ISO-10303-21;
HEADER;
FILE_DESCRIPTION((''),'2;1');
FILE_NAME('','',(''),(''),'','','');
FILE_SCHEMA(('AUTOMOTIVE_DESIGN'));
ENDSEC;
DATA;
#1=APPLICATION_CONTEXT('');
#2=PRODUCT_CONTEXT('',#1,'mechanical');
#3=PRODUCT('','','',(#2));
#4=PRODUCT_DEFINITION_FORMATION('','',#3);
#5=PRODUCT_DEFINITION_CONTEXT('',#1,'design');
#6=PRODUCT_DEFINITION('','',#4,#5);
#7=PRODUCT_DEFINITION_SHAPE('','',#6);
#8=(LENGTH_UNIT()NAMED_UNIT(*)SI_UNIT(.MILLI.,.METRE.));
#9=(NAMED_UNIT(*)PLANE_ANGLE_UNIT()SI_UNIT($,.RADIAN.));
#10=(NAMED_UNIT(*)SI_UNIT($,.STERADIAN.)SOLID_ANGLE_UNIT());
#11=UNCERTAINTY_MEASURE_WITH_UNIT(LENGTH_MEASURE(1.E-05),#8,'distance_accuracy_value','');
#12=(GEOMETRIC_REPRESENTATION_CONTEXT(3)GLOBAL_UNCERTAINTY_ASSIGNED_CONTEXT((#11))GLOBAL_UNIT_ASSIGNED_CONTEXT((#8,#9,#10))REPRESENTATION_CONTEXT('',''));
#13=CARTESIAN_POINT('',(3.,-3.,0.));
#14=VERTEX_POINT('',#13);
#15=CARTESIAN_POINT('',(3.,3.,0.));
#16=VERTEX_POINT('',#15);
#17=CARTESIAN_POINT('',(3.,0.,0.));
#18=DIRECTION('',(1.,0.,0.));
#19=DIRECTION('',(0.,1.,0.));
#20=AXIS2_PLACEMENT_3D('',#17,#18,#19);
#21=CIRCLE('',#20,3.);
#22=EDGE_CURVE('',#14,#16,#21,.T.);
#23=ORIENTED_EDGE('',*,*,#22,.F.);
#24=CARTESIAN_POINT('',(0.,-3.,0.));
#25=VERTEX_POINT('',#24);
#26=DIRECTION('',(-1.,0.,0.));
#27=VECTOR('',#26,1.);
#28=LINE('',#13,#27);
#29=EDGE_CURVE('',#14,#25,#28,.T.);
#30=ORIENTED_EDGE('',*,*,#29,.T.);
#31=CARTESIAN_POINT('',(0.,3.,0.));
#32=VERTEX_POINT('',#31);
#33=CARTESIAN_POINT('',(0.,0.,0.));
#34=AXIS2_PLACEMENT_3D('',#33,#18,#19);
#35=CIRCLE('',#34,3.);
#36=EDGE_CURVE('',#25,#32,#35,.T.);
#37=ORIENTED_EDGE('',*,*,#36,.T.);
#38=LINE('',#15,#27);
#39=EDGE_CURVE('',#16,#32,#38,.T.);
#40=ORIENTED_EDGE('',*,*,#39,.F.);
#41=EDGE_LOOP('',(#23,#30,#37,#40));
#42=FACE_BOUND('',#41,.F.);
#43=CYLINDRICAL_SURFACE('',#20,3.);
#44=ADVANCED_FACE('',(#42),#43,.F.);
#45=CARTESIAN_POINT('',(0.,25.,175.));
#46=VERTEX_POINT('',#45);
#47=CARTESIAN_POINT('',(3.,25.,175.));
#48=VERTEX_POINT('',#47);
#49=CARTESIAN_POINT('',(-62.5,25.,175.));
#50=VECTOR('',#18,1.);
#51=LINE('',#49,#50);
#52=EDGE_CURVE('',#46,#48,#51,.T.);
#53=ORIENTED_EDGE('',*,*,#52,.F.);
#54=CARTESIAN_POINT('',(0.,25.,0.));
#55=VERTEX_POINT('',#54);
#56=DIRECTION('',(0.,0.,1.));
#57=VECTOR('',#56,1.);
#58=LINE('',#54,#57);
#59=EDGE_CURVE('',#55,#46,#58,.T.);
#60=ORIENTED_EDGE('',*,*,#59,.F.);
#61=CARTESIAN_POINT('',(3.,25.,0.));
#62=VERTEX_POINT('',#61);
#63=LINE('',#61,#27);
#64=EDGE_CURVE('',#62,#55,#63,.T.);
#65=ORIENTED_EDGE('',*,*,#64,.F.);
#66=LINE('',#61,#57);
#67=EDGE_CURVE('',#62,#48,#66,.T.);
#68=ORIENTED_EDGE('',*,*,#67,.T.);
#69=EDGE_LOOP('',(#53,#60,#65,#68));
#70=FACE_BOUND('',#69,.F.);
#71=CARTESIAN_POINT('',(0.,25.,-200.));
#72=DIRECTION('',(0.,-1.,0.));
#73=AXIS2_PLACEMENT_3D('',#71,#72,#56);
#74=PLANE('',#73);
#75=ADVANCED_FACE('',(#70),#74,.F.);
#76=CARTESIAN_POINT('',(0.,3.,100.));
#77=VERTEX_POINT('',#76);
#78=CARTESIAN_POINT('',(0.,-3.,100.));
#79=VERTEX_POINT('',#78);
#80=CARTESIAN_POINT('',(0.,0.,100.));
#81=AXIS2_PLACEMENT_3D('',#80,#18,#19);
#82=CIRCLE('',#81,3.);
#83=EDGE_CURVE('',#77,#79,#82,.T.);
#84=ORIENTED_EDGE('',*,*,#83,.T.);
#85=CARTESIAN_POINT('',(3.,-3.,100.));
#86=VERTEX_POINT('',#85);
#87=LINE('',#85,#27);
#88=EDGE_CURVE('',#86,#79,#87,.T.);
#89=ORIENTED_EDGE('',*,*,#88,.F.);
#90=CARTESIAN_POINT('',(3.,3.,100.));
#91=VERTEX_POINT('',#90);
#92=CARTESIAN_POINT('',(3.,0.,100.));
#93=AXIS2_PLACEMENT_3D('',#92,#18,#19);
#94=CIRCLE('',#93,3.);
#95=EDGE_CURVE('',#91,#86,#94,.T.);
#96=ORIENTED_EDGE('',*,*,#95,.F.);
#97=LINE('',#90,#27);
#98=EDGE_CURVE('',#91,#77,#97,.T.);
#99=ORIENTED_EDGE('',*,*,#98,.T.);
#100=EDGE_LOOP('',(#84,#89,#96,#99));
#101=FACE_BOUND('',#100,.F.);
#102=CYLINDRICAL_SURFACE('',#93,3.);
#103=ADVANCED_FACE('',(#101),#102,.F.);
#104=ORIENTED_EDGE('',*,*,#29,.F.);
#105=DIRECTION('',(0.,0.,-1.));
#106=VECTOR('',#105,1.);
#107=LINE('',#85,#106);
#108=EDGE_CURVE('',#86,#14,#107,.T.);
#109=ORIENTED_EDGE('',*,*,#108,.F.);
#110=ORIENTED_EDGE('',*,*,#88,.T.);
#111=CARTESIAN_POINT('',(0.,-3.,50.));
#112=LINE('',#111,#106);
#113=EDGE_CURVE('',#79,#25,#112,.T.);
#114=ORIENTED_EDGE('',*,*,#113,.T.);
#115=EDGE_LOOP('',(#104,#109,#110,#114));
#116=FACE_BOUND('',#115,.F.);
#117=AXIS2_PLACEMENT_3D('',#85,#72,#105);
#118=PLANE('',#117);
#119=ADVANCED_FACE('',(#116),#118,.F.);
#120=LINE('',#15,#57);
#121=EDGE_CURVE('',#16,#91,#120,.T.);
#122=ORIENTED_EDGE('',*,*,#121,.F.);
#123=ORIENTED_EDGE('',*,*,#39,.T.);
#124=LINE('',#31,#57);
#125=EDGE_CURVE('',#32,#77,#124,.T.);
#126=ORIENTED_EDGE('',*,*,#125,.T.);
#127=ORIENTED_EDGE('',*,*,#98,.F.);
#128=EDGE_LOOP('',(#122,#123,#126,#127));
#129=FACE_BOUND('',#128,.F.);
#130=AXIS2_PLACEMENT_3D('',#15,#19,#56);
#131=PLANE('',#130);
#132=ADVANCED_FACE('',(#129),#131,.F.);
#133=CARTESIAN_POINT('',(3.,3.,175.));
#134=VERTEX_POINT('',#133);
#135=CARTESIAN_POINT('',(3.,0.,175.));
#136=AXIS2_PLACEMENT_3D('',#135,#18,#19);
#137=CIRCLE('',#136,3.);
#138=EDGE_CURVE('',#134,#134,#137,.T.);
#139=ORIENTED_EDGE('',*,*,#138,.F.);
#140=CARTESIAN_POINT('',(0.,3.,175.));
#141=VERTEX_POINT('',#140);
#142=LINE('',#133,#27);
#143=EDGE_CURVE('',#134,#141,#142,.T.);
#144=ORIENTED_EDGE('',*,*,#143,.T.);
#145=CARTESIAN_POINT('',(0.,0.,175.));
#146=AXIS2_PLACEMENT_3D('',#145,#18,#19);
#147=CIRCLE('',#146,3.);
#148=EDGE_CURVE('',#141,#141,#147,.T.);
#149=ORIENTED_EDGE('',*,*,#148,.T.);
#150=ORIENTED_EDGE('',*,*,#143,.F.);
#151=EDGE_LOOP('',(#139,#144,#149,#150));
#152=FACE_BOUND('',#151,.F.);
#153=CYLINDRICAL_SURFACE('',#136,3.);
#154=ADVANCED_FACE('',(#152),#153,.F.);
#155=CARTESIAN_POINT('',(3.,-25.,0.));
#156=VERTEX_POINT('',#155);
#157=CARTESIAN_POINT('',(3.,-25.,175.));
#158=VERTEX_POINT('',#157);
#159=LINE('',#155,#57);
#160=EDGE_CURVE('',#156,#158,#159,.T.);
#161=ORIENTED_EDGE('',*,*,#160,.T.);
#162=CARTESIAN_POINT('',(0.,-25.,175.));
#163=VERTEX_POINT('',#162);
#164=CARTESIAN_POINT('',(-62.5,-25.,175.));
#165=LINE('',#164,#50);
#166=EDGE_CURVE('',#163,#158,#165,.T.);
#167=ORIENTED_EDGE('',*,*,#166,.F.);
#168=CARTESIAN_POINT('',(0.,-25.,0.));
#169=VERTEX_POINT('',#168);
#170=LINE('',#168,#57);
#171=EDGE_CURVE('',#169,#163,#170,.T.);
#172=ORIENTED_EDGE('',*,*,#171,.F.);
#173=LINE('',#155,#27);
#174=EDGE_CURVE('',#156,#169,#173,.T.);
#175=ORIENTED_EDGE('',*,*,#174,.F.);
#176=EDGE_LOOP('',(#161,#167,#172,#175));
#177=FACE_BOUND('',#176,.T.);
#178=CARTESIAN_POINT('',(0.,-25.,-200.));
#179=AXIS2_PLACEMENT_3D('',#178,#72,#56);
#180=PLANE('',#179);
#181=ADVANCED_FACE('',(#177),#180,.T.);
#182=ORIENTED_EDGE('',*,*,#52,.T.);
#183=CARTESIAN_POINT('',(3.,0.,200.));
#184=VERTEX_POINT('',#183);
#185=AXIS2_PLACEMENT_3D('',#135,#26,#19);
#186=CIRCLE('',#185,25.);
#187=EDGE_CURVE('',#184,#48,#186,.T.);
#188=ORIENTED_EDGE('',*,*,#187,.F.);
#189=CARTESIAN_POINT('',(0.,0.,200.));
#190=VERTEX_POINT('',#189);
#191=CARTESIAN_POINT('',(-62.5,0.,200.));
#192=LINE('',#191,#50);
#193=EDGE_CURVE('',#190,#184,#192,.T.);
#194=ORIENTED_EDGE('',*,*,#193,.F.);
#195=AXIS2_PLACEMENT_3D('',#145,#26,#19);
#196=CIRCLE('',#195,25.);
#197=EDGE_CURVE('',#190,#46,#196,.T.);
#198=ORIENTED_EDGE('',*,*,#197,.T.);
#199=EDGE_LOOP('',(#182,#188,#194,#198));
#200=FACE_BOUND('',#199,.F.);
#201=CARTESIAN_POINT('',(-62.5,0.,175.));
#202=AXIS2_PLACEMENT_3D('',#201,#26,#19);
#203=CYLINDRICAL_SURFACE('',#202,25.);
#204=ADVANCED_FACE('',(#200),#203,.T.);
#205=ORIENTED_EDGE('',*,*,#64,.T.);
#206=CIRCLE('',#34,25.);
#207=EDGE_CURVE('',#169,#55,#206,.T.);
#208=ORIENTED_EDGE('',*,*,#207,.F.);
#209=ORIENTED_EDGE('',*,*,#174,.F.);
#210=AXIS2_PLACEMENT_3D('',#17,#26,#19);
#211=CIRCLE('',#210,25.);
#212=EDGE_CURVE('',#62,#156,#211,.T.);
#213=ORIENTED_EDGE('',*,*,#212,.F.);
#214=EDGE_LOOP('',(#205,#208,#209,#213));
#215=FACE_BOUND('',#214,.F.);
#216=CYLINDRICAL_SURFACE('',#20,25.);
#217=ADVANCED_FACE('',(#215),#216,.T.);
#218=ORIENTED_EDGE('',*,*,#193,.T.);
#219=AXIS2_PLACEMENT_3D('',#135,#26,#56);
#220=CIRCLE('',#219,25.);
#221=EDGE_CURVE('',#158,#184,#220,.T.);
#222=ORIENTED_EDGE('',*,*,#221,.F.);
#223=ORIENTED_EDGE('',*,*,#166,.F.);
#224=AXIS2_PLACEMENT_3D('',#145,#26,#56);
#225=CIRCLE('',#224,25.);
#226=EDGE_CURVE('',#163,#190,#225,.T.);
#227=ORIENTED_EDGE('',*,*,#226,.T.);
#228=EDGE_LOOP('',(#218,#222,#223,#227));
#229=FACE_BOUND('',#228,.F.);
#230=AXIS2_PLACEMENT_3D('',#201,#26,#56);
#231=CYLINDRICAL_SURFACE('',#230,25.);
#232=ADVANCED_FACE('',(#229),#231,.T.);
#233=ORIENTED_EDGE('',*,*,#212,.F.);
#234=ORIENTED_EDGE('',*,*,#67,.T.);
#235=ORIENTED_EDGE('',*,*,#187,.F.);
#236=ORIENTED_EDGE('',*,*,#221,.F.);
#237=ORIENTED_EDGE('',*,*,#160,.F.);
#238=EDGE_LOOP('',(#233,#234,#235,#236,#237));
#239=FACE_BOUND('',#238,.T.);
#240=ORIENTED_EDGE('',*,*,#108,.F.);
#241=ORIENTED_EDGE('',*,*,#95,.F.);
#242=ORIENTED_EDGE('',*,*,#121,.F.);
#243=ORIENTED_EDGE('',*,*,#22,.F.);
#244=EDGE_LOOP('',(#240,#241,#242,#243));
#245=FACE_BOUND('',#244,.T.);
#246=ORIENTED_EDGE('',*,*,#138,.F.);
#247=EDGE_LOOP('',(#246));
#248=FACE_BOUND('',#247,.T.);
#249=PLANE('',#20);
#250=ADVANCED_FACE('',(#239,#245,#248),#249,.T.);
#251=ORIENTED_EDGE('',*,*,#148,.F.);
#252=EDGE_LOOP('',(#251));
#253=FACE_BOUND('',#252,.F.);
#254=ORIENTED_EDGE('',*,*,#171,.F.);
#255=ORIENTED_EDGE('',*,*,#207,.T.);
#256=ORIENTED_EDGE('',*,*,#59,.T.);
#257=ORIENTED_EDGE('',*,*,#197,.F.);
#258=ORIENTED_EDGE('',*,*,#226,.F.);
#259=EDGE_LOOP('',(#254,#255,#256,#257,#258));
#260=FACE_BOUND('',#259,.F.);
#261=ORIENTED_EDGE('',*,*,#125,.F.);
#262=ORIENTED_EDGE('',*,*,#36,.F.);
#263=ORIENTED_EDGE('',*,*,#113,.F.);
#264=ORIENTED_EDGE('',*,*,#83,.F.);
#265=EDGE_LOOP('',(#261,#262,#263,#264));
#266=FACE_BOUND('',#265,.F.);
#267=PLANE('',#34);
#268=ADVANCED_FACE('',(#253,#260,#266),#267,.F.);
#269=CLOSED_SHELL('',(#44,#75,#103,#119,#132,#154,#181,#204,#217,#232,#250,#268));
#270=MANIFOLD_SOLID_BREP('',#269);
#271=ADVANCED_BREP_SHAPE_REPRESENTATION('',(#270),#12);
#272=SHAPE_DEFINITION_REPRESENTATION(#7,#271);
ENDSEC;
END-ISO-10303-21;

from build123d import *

# Parameters (mm, degrees)
F0_W        = 50
F0_H        = 400
F1_DEPTH    = 3
F2_T1_DEPTH = 128
F3_R        = 3
F4_DEPTH    = 25
F6_DEPTH    = 25
F8_DEPTH    = 25


# Not quite as in the source:
# - a fillet or chamfer that OpenCascade refuses, or shapes differently, is made with other operations: its cross-section is extruded or revolved along the edge and cut away or added


with BuildPart() as f1:
    # F0 (on Right) → F1 (new body)
    with BuildSketch(Plane.YZ):
        Rectangle(F0_W, F0_H)
    extrude(amount=F1_DEPTH)

    # F2: fillet of radius 25 on 4 edges, made by hand

    # F2_s2 → F2_t1 (cut)
    with BuildSketch(Plane.YZ.offset(-62.5)):
        with BuildLine():
            ThreePointArc((0, 200), (-17.6776695297, 192.6776695297), (-25, 175))
            Line((-25, 175), (-25, 200))
            Line((-25, 200), (0, 200))
        make_face()
        with BuildLine():
            ThreePointArc((-25, -175), (-17.6776695297, -192.6776695297), (0, -200))
            Line((0, -200), (-25, -200))
            Line((-25, -200), (-25, -175))
        make_face()
        with BuildLine():
            ThreePointArc((25, 175), (17.6776695297, 192.6776695297), (0, 200))
            Line((0, 200), (25, 200))
            Line((25, 200), (25, 175))
        make_face()
        with BuildLine():
            ThreePointArc((25, -175), (17.6776695297, -192.6776695297), (0, -200))
            Line((0, -200), (25, -200))
            Line((25, -200), (25, -175))
        make_face()
    extrude(amount=F2_T1_DEPTH, mode=Mode.SUBTRACT)

    # F3 (on face) → F4 (cut)
    with BuildSketch(Plane.YZ.offset(3)):
        with Locations((0, 175)):
            Circle(F3_R)
    extrude(amount=-F4_DEPTH, mode=Mode.SUBTRACT)

    # F5 (on face) → F6 (cut)
    with BuildSketch(Plane.YZ.offset(3)):
        with BuildLine():
            ThreePointArc((-3, 100), (0, 97), (3, 100))
            ThreePointArc((3, 100), (0, 103), (-3, 100))
        make_face()
        with BuildLine():
            Line((3, 0), (3, 100))
            ThreePointArc((3, 100), (0, 97), (-3, 100))
            Line((-3, 100), (-3, 0))
            ThreePointArc((-3, 0), (0, 3), (3, 0))
        make_face()
        with BuildLine():
            ThreePointArc((-3, 0), (0, -3), (3, 0))
            ThreePointArc((3, 0), (0, 3), (-3, 0))
        make_face()
    extrude(amount=-F6_DEPTH, mode=Mode.SUBTRACT)

    # F7 (on face) → F8 (cut)
    with BuildSketch(Plane.YZ.offset(3)):
        with BuildLine():
            ThreePointArc((25, 0), (0, -25), (-25, 0))
            Line((-25, 0), (-25, -175))
            ThreePointArc((-25, -175), (0, -200), (25, -175))
            Line((25, -175), (25, 0))
        make_face()
    extrude(amount=-F8_DEPTH, mode=Mode.SUBTRACT)


solid = f1.part
